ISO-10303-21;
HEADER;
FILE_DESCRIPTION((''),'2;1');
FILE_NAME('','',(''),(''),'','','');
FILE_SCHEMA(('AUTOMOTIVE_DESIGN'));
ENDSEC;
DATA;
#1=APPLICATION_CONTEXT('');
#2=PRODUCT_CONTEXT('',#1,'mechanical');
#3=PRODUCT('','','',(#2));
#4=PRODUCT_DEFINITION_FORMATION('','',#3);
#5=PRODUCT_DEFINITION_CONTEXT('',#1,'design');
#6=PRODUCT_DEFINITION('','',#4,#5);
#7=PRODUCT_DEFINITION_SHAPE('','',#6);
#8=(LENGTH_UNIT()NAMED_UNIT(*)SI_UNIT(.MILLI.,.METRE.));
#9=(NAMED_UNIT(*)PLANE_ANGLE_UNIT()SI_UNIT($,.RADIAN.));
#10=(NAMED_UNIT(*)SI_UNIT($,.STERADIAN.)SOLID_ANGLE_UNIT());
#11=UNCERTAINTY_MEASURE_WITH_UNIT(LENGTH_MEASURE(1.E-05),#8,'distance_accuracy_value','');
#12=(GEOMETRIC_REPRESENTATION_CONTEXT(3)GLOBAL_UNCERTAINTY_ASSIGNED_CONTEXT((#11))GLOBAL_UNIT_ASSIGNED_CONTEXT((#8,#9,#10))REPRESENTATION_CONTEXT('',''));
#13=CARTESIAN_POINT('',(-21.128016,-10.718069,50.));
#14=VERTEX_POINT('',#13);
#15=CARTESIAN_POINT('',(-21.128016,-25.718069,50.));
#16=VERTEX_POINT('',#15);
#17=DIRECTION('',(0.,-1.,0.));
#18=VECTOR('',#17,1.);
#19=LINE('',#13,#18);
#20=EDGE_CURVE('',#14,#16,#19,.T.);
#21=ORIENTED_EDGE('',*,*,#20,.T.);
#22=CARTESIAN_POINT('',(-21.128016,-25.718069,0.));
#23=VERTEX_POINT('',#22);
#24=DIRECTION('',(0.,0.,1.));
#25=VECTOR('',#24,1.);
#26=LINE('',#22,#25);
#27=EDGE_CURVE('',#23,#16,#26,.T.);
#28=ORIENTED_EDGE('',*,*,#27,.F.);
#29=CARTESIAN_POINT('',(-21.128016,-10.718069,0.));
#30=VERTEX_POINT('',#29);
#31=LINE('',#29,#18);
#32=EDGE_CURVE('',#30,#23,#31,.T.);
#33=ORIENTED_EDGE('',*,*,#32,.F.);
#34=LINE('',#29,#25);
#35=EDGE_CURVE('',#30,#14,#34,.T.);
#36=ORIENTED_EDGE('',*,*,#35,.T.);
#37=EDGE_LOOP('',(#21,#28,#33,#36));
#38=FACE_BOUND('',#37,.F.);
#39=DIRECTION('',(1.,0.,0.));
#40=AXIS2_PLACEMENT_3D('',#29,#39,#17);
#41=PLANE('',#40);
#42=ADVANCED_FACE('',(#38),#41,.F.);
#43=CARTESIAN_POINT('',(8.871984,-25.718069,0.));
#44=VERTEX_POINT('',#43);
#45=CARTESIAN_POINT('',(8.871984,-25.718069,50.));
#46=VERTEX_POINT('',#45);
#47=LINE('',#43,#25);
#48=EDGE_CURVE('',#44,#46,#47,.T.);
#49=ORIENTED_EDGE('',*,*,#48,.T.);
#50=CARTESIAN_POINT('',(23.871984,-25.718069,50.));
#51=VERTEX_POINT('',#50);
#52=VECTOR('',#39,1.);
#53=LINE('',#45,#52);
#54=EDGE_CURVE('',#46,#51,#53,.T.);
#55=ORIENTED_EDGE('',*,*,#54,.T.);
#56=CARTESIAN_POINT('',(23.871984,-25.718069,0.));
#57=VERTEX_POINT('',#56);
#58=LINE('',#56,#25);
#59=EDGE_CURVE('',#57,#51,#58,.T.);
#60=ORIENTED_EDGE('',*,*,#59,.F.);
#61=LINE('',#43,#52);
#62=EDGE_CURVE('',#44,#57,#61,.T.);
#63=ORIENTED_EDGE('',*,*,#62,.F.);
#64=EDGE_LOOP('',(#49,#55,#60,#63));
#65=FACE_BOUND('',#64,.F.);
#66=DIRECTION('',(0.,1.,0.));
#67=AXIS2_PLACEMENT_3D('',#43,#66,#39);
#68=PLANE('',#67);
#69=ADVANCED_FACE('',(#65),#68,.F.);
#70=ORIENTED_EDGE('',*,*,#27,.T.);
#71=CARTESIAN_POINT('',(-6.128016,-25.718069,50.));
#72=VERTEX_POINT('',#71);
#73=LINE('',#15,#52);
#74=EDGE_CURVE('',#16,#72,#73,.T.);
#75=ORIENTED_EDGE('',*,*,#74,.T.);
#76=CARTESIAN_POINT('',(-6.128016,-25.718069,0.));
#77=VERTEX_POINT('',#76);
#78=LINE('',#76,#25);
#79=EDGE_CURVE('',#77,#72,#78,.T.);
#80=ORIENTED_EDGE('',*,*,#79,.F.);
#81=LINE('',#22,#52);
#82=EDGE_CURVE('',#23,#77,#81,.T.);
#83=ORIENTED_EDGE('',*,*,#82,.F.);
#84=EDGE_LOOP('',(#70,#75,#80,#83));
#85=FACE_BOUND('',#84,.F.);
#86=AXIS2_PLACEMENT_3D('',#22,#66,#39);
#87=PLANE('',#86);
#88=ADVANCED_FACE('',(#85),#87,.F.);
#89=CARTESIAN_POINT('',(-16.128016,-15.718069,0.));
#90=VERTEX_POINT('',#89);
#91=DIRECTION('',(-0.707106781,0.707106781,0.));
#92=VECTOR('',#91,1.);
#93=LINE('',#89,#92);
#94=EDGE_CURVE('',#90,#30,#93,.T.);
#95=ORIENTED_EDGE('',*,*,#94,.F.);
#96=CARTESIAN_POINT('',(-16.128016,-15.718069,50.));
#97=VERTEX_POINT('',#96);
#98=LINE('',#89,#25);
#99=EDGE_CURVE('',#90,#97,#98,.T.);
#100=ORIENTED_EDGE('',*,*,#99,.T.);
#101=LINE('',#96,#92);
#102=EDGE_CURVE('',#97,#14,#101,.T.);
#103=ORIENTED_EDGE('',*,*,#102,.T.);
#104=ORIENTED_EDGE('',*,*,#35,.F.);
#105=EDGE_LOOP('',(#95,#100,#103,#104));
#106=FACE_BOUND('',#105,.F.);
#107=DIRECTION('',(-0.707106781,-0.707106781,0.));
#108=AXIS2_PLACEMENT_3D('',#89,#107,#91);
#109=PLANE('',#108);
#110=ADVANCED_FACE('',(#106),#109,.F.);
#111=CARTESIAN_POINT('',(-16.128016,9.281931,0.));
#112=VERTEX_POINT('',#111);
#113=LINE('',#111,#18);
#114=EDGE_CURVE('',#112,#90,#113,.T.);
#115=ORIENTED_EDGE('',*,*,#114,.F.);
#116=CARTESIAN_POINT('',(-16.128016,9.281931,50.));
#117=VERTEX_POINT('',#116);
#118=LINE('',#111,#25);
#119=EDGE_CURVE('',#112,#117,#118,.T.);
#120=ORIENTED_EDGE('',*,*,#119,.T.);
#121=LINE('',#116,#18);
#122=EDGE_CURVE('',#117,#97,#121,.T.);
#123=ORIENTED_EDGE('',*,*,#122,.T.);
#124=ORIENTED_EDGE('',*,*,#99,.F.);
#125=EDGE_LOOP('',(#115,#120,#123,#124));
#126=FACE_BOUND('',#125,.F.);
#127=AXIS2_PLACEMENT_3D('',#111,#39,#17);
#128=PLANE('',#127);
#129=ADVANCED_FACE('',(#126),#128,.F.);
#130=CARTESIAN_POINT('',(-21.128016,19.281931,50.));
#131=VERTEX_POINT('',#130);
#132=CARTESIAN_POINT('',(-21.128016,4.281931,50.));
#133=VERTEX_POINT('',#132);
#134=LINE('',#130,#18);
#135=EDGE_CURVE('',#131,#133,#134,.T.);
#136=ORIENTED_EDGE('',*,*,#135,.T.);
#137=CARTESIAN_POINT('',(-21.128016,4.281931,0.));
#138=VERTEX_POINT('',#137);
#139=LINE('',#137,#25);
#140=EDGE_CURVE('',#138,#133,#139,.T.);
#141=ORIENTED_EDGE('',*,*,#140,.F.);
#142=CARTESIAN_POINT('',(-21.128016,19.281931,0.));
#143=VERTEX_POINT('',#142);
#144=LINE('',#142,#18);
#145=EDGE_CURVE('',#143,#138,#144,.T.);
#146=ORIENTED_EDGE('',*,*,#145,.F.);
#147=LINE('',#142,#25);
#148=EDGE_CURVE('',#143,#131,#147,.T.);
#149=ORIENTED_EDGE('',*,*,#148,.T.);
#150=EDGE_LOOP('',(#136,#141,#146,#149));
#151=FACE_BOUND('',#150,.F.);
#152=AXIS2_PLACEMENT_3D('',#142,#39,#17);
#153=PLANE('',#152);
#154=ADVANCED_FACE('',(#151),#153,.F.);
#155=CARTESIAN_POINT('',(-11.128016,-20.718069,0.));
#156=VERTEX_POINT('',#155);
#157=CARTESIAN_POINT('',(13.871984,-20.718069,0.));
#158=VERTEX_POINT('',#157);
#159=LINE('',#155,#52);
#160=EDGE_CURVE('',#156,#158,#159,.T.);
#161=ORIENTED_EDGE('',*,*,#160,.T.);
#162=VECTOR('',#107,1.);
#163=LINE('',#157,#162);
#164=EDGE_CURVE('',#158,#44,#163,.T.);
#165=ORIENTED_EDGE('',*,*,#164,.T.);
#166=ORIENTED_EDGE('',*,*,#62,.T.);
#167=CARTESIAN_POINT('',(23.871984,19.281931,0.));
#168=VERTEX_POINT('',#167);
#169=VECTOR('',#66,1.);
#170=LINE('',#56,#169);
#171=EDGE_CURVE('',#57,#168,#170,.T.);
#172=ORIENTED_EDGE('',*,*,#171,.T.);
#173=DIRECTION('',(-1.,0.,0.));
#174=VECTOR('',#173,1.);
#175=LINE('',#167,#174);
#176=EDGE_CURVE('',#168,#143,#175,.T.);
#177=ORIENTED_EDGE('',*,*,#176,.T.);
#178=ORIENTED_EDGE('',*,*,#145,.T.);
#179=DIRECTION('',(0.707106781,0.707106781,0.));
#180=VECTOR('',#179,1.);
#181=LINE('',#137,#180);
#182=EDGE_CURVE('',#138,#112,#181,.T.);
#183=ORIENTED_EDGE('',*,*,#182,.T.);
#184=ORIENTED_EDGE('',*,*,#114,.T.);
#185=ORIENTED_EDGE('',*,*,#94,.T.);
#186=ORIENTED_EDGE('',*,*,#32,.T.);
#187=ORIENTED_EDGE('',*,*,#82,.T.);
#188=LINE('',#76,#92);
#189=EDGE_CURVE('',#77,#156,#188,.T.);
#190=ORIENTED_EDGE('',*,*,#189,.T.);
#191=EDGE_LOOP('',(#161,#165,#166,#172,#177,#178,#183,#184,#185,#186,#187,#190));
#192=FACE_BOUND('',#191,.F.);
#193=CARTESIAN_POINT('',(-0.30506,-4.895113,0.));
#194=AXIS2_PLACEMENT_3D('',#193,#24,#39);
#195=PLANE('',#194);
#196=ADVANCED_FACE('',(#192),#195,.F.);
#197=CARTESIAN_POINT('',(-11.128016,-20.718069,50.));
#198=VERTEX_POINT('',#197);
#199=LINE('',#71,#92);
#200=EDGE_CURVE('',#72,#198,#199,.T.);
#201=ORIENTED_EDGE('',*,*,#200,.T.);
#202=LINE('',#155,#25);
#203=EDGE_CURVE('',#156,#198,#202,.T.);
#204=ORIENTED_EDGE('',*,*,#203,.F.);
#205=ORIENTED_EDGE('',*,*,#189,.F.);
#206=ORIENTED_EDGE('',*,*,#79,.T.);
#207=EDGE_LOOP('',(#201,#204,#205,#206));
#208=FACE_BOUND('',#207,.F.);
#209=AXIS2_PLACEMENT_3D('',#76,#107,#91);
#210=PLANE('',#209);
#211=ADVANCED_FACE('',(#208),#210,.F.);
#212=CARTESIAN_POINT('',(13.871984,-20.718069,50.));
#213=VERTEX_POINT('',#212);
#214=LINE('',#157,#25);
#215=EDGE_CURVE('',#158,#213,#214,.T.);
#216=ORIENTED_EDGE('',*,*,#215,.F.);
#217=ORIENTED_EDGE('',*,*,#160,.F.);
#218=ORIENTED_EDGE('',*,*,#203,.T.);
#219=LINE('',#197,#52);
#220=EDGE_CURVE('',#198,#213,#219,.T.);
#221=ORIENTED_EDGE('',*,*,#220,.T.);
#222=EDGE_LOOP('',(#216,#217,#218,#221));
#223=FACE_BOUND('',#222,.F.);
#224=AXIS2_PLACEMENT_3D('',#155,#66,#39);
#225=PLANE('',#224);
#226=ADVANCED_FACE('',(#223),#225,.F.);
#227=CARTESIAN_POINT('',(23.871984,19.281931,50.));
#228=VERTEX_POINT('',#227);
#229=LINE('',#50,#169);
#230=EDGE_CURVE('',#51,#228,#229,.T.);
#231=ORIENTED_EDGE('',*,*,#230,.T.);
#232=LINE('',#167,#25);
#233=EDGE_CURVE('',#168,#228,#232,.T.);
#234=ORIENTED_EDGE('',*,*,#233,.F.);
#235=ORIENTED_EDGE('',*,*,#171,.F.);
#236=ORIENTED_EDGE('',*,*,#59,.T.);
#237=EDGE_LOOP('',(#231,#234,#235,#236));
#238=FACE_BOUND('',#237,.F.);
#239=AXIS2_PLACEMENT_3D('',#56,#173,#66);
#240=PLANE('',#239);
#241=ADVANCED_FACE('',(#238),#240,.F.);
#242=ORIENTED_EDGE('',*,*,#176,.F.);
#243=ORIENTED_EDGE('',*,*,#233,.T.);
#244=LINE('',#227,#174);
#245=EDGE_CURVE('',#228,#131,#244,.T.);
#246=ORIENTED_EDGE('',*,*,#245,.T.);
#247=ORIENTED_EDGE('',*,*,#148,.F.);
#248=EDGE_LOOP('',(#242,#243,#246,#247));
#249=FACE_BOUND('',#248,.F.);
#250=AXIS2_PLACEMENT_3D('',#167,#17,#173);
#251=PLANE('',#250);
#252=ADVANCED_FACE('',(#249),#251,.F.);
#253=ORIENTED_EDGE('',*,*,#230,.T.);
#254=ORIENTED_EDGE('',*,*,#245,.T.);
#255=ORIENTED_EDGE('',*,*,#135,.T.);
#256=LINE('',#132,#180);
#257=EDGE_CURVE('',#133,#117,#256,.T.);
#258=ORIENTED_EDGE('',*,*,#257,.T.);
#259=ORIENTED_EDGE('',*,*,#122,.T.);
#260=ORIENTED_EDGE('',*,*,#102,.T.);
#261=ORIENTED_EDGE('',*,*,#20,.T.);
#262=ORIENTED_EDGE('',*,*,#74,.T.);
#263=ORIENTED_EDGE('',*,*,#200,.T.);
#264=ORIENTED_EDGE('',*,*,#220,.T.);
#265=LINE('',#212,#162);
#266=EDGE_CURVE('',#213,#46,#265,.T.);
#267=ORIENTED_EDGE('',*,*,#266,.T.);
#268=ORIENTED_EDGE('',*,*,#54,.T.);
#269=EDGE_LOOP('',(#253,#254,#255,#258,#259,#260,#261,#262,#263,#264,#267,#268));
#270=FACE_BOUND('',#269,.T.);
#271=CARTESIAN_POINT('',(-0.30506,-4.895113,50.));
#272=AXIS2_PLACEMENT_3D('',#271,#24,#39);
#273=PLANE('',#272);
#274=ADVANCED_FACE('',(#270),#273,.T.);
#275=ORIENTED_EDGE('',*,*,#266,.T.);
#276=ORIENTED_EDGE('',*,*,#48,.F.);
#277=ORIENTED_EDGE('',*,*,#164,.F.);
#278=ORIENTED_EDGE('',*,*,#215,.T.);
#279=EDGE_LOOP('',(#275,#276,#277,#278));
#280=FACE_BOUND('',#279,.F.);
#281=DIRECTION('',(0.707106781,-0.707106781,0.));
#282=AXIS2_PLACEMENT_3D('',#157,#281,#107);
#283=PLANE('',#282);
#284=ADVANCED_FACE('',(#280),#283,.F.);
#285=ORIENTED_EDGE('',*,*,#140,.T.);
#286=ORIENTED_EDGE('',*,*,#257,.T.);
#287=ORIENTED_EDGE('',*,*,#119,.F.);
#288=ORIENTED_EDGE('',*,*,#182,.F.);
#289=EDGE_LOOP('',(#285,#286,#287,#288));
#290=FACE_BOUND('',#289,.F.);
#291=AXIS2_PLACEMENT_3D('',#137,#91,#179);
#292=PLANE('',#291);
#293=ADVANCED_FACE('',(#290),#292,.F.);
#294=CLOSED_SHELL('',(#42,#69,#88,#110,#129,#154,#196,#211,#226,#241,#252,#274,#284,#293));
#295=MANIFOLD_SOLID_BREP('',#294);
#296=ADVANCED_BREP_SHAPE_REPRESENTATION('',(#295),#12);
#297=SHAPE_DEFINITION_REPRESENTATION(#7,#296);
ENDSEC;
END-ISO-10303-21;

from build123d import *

# Parameters (mm, degrees)
F1_DEPTH = 50


# Not quite as in the source:
# - a feature names something its author has since deleted; it is built from what else it names


with BuildPart() as f1:
    # F0 (on Top) → F1 (new body)
    with BuildSketch(Plane.XY):
        Polygon((-6.1280163284, 19.2819308888), (-21.1280163284, 19.2819308888), (-21.1280163284, 4.2819308888), (-16.1280163284, 9.2819308888), (-16.1280163284, -15.7180691112), (-21.1280163284, -10.7180691112), (-21.1280163284, -25.7180691112), (-6.1280163284, -25.7180691112), (-11.1280163284, -20.7180691112), (13.8719836716, -20.7180691112), (8.8719836716, -25.7180691112), (23.8719836716, -25.7180691112), (23.8719836716, -10.7180691112), (23.8719836716, 4.2819308888), (23.8719836716, 19.2819308888), (8.8719836716, 19.2819308888), align=None)
    extrude(amount=F1_DEPTH)


solid = f1.part
